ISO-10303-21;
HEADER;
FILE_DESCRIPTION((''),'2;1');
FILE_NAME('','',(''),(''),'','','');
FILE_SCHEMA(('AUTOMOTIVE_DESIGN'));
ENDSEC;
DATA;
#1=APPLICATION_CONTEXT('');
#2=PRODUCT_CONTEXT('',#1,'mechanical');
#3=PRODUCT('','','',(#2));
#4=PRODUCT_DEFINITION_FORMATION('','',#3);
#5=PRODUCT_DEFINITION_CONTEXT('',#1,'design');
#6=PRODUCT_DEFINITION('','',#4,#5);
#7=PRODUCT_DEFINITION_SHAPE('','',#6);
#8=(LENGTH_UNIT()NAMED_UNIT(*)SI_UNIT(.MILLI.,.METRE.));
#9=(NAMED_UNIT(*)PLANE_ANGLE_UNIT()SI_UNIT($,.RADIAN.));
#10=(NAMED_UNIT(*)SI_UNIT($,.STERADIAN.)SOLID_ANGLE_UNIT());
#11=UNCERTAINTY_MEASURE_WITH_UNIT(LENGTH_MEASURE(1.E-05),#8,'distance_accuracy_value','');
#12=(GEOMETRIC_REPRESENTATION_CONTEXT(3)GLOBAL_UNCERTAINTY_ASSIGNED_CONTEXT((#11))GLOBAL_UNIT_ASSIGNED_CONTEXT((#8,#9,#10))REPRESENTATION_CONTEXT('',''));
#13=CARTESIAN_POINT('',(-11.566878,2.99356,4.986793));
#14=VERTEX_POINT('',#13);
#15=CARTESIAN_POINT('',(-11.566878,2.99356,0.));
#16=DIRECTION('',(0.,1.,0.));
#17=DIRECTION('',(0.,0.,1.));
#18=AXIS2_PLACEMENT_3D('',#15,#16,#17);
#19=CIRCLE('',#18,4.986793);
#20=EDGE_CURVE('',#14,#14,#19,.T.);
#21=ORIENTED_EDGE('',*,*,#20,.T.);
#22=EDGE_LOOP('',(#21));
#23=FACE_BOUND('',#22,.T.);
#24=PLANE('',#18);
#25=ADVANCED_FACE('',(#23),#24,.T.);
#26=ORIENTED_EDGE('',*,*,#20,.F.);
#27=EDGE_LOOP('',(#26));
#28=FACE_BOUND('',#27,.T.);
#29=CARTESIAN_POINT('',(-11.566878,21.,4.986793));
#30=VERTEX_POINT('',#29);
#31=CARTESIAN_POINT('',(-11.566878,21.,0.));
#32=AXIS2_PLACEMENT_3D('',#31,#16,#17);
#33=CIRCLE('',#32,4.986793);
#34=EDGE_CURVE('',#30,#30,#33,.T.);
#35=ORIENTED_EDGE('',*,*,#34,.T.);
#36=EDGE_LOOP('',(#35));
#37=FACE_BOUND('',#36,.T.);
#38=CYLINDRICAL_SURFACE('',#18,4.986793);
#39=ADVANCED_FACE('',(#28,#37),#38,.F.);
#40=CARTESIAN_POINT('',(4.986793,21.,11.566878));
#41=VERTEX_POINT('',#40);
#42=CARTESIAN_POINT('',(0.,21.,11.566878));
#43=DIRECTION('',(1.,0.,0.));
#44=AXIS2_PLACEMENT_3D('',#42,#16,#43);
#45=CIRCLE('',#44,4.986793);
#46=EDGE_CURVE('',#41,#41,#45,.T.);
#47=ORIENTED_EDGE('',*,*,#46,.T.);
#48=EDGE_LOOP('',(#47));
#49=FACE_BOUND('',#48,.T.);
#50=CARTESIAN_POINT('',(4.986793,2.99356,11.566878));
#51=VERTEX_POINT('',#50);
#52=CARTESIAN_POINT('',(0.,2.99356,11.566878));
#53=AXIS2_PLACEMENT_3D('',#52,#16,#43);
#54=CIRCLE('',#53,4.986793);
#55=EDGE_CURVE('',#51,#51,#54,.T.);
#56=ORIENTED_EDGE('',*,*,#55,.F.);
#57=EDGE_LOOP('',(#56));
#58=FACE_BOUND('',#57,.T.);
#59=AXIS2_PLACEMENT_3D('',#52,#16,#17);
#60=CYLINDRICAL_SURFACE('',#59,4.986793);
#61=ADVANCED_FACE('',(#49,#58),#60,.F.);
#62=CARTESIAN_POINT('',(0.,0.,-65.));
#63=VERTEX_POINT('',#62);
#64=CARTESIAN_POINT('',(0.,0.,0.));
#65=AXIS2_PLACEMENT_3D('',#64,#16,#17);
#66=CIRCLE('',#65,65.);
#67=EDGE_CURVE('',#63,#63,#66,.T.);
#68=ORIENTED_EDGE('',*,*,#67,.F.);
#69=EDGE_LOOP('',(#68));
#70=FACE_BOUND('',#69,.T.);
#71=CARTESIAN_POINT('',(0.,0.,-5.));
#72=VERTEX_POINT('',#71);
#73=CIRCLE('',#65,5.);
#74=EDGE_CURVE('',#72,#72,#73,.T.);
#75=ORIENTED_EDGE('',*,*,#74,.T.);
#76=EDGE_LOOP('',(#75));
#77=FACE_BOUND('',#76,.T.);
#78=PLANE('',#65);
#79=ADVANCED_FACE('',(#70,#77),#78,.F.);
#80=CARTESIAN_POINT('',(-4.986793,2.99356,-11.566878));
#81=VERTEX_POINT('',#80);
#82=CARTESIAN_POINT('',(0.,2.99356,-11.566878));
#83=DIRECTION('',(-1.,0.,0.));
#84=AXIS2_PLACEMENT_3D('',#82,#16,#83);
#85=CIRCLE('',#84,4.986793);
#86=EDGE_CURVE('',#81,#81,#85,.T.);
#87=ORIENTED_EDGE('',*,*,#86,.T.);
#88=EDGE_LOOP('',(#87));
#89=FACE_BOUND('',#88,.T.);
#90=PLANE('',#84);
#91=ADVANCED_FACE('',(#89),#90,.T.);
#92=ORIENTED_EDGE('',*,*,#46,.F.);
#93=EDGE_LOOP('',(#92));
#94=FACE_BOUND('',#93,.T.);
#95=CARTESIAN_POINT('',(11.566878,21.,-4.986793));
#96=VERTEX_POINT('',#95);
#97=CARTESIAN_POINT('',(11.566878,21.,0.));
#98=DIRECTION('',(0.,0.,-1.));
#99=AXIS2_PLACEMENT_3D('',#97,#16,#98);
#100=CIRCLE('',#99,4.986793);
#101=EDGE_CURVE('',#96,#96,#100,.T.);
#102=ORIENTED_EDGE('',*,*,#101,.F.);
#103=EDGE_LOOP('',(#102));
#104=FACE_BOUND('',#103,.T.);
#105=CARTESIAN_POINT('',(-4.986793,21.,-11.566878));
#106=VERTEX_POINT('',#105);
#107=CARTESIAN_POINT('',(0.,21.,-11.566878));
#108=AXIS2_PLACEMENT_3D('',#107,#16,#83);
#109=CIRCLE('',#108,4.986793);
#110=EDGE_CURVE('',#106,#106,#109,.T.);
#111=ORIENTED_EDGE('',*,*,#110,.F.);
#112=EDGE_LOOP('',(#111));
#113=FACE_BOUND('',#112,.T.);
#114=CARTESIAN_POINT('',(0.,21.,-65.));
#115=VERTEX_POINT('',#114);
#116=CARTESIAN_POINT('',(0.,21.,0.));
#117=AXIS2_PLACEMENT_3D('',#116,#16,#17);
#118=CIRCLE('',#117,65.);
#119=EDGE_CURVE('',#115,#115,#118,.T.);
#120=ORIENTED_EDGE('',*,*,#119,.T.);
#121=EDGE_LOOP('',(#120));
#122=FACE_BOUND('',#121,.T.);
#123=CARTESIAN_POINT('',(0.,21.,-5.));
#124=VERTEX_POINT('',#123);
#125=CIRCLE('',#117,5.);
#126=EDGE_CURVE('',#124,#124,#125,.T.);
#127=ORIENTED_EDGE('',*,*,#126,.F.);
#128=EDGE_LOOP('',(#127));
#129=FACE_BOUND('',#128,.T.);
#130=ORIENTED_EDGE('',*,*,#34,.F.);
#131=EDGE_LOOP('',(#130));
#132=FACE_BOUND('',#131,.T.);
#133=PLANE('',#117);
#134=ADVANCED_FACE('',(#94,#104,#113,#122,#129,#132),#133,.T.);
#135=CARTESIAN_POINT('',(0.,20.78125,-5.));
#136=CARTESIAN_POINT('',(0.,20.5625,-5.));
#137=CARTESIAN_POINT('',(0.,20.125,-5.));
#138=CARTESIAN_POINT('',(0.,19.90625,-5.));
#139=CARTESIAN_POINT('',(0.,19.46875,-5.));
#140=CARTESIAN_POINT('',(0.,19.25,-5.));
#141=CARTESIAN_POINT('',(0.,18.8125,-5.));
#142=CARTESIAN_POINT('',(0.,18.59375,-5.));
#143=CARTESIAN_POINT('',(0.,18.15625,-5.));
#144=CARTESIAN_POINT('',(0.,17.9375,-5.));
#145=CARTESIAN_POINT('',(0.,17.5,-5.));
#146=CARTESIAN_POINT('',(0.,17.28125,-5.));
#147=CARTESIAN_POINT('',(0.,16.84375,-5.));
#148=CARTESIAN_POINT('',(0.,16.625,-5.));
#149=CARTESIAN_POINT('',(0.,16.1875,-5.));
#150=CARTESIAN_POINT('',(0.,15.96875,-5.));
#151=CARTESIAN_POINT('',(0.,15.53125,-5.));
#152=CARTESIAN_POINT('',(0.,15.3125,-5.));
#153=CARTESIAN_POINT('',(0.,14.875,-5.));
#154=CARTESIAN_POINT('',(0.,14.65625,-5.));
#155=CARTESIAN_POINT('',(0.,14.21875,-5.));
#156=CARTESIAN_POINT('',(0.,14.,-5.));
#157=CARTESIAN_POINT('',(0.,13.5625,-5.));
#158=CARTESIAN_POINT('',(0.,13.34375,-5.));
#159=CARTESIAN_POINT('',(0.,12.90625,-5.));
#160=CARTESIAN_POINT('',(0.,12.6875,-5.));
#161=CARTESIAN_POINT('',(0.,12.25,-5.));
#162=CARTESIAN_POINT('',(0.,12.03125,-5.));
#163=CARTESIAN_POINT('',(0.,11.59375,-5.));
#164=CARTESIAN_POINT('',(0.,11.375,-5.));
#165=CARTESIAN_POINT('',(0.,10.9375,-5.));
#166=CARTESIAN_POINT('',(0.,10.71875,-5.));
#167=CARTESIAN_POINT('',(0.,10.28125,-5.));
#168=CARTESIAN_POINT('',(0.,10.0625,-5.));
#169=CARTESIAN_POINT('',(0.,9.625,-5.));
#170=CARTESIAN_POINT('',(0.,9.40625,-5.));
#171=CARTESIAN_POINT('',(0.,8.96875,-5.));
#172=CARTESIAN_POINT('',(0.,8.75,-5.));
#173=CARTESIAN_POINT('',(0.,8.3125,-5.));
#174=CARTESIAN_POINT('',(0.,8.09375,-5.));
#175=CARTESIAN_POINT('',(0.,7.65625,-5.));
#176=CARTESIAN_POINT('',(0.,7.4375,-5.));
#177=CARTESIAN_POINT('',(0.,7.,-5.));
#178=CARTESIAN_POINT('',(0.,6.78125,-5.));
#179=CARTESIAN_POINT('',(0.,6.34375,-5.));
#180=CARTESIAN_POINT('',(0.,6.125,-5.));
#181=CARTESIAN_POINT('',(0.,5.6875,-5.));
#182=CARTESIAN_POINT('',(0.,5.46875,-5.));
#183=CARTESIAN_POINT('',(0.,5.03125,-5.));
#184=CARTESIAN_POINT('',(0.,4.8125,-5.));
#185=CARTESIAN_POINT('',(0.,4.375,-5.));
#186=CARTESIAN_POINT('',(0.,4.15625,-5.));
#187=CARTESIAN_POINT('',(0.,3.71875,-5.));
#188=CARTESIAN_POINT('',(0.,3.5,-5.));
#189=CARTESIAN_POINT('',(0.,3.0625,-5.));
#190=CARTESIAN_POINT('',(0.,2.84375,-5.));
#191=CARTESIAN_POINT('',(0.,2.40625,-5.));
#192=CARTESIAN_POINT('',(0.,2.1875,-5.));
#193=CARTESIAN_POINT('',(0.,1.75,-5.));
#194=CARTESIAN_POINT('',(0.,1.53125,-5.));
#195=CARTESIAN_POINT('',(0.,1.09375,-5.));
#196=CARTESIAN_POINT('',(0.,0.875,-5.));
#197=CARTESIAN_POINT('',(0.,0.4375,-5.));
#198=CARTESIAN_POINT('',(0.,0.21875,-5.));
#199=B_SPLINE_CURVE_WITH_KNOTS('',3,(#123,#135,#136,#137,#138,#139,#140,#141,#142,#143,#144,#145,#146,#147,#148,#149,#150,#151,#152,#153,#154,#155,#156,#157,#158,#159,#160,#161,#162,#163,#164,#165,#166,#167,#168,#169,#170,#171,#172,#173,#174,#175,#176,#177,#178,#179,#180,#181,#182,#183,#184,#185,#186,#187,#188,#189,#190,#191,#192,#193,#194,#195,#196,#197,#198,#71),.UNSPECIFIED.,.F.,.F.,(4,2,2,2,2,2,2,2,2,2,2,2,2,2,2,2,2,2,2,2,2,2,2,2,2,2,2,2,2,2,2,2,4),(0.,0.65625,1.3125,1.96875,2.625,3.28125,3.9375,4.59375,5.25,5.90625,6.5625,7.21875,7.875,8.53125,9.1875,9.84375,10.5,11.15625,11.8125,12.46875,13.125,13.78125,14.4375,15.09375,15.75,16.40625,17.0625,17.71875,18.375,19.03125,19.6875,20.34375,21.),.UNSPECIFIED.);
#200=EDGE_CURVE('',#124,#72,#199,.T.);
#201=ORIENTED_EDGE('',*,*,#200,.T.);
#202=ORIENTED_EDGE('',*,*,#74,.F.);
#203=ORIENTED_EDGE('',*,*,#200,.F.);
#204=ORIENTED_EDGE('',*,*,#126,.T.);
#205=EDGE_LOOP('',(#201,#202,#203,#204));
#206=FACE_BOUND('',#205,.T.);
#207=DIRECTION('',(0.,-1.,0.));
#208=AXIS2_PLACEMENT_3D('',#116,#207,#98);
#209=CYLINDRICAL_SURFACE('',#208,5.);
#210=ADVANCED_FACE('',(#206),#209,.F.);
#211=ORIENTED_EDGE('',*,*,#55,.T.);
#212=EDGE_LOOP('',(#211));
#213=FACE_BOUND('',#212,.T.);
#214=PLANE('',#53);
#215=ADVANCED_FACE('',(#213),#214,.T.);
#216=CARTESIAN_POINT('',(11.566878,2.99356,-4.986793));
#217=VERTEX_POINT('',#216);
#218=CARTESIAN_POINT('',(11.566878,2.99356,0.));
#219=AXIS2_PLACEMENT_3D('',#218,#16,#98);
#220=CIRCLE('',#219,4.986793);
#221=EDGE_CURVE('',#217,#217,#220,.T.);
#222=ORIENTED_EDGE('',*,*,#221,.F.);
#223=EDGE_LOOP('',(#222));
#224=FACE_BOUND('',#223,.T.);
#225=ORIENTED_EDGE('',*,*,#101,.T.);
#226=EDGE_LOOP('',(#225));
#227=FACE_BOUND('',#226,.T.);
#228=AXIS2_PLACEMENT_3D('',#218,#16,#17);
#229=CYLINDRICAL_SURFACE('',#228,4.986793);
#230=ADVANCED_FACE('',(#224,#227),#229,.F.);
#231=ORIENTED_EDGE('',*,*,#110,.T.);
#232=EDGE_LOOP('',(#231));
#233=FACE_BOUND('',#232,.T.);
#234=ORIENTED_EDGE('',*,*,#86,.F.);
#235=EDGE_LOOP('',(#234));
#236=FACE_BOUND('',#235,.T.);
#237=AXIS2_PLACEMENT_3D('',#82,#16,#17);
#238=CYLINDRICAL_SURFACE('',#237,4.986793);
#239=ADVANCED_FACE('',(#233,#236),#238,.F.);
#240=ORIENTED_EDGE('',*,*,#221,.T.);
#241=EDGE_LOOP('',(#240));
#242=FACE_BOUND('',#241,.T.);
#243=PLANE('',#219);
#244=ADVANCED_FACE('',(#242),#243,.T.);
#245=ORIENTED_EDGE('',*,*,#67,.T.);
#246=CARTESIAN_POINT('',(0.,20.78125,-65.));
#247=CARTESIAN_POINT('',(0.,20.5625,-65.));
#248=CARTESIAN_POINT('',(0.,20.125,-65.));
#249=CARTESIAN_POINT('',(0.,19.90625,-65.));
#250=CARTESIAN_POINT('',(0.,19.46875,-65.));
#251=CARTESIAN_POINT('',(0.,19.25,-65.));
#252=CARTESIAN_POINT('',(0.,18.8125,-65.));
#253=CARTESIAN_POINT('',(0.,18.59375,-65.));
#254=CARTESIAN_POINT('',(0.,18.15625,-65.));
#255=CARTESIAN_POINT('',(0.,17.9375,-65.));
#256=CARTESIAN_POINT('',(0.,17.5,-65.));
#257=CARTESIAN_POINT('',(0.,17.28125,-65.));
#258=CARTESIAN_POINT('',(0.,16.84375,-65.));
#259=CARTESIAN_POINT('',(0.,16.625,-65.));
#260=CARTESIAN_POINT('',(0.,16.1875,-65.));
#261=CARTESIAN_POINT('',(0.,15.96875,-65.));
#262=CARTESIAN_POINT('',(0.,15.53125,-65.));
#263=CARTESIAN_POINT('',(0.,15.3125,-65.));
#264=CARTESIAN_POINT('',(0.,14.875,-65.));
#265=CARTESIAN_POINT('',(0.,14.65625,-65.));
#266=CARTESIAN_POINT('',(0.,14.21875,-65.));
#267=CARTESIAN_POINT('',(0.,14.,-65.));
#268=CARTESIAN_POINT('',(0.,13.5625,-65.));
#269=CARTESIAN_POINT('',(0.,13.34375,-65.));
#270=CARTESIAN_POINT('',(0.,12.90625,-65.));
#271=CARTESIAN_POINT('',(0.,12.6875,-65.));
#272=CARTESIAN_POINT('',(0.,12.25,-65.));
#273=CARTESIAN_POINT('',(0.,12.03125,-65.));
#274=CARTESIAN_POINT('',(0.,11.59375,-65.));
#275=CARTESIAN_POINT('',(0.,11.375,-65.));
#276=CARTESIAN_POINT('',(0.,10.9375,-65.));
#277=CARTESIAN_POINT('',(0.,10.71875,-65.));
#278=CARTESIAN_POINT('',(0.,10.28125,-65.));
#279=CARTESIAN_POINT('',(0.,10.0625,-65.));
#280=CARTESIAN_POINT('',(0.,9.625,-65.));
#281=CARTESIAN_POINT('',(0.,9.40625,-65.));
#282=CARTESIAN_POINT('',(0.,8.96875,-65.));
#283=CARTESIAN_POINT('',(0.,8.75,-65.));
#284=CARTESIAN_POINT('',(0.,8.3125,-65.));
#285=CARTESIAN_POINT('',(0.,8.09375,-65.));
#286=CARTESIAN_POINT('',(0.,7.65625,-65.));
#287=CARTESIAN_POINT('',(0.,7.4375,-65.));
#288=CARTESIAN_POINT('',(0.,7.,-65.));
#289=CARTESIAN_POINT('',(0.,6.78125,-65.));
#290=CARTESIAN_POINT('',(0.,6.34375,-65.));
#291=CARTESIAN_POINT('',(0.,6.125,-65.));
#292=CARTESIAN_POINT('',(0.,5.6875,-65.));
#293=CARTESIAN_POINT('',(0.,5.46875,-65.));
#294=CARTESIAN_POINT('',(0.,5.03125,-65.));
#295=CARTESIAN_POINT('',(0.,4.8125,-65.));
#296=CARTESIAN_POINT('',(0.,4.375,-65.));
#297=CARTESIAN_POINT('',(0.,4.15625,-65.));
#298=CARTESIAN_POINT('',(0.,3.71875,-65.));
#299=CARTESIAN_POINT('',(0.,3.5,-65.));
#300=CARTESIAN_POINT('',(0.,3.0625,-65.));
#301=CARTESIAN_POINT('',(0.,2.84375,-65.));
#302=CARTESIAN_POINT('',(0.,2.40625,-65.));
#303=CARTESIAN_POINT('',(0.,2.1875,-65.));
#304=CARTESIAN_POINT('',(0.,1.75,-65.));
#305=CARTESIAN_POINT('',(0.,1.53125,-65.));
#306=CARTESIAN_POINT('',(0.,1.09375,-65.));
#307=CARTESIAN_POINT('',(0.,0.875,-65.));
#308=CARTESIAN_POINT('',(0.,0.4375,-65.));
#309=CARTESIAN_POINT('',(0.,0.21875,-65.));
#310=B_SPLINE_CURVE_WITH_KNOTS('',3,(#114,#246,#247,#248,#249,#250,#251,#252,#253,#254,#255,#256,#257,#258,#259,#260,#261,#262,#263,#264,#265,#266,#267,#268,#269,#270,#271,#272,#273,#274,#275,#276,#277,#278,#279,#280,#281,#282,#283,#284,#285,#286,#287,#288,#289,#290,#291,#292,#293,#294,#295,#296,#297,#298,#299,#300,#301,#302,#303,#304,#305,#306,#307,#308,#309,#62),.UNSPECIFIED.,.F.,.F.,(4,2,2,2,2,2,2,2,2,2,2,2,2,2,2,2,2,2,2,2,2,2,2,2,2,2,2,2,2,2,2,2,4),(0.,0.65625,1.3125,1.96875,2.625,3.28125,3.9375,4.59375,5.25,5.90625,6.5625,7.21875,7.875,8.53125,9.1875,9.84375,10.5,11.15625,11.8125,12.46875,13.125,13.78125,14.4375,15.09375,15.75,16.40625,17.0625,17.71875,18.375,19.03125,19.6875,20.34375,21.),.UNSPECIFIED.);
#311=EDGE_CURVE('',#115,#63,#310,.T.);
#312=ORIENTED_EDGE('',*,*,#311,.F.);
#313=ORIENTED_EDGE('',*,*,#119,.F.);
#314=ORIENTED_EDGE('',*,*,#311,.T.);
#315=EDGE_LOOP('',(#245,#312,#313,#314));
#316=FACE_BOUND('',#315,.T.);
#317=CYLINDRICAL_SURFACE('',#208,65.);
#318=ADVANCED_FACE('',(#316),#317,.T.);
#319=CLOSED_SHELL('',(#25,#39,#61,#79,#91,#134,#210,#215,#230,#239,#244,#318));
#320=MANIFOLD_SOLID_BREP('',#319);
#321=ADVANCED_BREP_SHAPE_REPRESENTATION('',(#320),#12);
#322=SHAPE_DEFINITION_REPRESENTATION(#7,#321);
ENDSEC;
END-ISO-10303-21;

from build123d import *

# Parameters (mm, degrees)
SKETCH1_R           = 65
BOSS_EXTRUDE1_DEPTH = 21
SKETCH2_R           = 5
CUT_EXTRUDE1_DEPTH  = 95.292099351
SKETCH3_R           = 4.986792835
CUT_EXTRUDE2_DEPTH  = 18.006440071
CIRPATTERN1_COUNT   = 4


with BuildPart() as part:
    # Sketch1 → Boss-Extrude1 (new body)
    with BuildSketch(Plane(origin=(0, 0, 0), x_dir=(1, 0, 0), z_dir=(0, 1, 0))):
        Circle(SKETCH1_R)
    extrude(amount=BOSS_EXTRUDE1_DEPTH)

    # Sketch2 → Cut-Extrude1 (cut, through all)
    with BuildSketch(Plane(origin=(0, 0, 0), x_dir=(1, 0, 0), z_dir=(0, 1, 0))):
        Circle(SKETCH2_R)
    extrude(amount=CUT_EXTRUDE1_DEPTH, mode=Mode.SUBTRACT)

    # Sketch3 → Cut-Extrude2 (cut)
    with BuildSketch(Plane(origin=(0, 21, 0), x_dir=(1, 0, 0), z_dir=(0, 1, 0))):
        with Locations((-11.56687807, 0)):
            Circle(SKETCH3_R)
    cut_extrude2 = extrude(amount=-CUT_EXTRUDE2_DEPTH, mode=Mode.SUBTRACT)

    # CirPattern1: Cut-Extrude2 ×4 about axis
    cirpattern1_axis = Axis((0, 0, 0), (0, 1, 0))
    for i in range(1, CIRPATTERN1_COUNT):
        add(cut_extrude2.rotate(cirpattern1_axis, i * 360 / CIRPATTERN1_COUNT), mode=Mode.SUBTRACT)


solid = part.part
